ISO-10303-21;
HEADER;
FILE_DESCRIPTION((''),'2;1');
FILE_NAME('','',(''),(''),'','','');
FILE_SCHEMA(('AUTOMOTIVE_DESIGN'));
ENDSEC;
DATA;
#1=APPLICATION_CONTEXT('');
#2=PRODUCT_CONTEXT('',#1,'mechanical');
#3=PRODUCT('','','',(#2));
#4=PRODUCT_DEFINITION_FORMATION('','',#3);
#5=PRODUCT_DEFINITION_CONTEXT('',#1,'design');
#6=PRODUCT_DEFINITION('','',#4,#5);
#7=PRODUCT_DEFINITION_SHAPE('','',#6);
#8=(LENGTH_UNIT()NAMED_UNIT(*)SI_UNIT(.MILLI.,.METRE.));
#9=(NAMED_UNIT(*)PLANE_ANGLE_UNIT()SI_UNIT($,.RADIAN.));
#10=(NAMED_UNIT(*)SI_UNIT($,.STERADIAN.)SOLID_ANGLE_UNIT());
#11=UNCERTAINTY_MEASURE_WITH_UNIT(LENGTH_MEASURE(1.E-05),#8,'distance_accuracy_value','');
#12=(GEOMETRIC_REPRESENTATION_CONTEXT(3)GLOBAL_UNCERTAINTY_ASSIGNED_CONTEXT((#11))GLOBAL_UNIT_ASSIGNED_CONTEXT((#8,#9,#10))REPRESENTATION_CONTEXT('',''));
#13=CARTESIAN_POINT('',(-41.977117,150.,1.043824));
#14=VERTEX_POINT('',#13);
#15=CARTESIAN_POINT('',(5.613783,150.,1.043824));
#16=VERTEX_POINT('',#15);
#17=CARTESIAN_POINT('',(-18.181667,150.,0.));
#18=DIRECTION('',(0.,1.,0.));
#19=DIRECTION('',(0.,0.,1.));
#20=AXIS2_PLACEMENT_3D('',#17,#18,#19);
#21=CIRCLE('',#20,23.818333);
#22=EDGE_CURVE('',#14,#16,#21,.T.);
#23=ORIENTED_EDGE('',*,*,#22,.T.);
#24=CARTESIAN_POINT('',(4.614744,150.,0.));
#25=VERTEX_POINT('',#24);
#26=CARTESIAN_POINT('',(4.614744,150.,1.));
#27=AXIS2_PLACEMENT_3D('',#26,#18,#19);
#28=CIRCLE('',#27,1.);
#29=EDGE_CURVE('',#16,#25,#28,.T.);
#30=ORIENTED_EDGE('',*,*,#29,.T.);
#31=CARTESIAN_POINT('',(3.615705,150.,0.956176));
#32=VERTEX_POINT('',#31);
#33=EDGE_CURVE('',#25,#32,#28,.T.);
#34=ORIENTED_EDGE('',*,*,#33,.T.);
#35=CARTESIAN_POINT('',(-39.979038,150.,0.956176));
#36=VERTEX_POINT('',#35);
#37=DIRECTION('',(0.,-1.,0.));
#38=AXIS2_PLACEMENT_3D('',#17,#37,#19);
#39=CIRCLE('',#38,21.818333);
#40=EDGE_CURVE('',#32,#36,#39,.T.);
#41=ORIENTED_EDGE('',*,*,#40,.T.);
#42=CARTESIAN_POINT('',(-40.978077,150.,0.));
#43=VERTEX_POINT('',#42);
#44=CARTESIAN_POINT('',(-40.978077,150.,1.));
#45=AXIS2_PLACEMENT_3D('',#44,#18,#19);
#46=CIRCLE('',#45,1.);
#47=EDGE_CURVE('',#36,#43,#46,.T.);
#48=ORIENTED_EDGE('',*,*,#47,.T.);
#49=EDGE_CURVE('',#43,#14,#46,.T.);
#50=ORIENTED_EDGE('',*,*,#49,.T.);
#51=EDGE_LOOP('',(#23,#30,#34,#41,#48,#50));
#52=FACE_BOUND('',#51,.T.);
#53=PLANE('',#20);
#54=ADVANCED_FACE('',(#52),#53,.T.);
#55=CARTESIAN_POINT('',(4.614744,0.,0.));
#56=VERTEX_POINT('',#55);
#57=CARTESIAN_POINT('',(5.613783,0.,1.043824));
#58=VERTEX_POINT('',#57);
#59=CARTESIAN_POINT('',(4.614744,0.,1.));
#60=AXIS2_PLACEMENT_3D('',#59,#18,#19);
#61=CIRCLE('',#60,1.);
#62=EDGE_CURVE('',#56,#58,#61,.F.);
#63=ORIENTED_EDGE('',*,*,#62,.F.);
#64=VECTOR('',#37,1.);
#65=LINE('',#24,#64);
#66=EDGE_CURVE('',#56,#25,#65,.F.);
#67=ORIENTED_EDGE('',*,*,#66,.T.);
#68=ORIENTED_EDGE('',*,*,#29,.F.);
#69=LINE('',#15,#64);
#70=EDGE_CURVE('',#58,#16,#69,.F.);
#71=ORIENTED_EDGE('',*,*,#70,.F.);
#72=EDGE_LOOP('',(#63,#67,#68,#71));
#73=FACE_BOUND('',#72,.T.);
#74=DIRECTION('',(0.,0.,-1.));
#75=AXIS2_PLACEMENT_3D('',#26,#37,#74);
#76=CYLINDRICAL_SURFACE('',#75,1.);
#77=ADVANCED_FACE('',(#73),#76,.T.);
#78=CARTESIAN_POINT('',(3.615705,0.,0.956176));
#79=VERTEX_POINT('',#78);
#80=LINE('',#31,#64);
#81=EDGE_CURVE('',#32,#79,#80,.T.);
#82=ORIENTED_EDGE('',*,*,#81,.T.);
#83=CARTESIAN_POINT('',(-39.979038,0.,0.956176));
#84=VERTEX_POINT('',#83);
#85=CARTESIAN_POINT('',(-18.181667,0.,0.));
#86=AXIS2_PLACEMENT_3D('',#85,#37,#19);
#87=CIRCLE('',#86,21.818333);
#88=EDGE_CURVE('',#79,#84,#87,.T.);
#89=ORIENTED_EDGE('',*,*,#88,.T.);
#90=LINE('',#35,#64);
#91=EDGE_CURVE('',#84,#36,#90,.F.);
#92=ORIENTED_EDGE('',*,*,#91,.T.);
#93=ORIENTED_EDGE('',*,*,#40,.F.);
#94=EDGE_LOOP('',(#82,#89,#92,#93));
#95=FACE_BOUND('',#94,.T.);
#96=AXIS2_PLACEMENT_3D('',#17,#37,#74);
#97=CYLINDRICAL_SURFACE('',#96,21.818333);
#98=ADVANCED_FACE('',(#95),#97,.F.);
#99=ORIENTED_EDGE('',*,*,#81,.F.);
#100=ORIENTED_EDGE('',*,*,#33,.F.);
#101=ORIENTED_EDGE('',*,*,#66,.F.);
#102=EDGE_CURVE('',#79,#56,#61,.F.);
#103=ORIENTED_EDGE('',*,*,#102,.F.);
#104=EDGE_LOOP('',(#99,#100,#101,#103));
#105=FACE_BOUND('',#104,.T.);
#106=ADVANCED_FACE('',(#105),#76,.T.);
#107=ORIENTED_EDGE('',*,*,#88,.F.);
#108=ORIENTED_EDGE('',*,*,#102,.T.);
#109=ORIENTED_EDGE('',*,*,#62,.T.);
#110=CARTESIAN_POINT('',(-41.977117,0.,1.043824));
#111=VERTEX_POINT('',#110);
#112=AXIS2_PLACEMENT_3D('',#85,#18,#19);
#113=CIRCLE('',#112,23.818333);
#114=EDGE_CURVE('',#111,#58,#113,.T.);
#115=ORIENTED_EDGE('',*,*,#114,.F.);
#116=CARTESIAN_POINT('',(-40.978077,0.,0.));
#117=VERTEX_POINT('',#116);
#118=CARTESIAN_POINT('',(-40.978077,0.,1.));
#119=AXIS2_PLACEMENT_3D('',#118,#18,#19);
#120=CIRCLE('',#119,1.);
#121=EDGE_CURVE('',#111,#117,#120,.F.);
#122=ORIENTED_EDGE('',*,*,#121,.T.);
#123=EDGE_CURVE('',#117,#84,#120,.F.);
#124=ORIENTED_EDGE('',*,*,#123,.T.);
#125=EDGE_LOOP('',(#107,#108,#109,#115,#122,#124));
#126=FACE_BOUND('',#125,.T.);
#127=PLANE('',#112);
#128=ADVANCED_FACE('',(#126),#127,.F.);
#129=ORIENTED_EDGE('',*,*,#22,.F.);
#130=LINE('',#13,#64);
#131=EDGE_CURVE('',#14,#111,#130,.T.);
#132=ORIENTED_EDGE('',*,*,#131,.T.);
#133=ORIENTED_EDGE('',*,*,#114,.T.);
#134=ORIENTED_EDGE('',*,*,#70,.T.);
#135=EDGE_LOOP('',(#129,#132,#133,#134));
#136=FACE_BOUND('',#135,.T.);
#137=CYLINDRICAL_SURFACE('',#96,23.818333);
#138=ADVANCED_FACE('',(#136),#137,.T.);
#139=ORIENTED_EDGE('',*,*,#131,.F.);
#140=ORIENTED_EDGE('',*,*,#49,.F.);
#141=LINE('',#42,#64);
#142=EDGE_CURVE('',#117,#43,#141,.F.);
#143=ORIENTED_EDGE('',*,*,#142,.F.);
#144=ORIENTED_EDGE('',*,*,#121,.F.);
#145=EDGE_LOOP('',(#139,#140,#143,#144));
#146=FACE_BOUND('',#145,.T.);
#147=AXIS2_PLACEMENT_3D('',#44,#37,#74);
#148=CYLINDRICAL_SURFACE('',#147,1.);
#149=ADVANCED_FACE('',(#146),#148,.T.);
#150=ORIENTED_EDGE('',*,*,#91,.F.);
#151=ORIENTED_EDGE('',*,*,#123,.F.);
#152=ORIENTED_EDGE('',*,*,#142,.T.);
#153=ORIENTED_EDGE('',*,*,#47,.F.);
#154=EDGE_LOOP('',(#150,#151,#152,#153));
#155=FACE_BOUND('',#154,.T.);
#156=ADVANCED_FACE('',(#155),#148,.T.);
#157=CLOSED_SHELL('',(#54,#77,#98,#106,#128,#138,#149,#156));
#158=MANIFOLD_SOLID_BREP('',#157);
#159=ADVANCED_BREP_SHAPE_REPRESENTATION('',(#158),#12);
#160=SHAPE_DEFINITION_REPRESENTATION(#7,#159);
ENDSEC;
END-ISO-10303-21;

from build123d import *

# Parameters (mm, degrees)
BOSS_EXTRUDE1_DEPTH = 150
FILLET1_R           = 1


with BuildPart() as part:
    # Sketch1 → Boss-Extrude1 (new body)
    with BuildSketch(Plane(origin=(0, 0, 0), x_dir=(1, 0, 0), z_dir=(0, 1, 0))):
        with BuildLine():
            Line((-42, 0), (-40, 0))
            ThreePointArc((-40, 0), (-18.181666667, -21.818333333), (3.636666667, 0))
            Line((3.636666667, 0), (5.636666667, 0))
            ThreePointArc((5.636666667, 0), (-18.181666667, -23.818333333), (-42, 0))
        make_face()
    extrude(amount=BOSS_EXTRUDE1_DEPTH)

    # Fillet1
    fillet1_edges = [part.edges().sort_by_distance(p)[0] for p in [
        (5.636666667, 75, 0),
        (3.636666667, 75, 0),
        (-40, 75, 0),
        (-42, 75, 0),
    ]]
    fillet(fillet1_edges, radius=FILLET1_R - 0.0001)  # a hair under: the kernel refuses the full size


solid = part.part
